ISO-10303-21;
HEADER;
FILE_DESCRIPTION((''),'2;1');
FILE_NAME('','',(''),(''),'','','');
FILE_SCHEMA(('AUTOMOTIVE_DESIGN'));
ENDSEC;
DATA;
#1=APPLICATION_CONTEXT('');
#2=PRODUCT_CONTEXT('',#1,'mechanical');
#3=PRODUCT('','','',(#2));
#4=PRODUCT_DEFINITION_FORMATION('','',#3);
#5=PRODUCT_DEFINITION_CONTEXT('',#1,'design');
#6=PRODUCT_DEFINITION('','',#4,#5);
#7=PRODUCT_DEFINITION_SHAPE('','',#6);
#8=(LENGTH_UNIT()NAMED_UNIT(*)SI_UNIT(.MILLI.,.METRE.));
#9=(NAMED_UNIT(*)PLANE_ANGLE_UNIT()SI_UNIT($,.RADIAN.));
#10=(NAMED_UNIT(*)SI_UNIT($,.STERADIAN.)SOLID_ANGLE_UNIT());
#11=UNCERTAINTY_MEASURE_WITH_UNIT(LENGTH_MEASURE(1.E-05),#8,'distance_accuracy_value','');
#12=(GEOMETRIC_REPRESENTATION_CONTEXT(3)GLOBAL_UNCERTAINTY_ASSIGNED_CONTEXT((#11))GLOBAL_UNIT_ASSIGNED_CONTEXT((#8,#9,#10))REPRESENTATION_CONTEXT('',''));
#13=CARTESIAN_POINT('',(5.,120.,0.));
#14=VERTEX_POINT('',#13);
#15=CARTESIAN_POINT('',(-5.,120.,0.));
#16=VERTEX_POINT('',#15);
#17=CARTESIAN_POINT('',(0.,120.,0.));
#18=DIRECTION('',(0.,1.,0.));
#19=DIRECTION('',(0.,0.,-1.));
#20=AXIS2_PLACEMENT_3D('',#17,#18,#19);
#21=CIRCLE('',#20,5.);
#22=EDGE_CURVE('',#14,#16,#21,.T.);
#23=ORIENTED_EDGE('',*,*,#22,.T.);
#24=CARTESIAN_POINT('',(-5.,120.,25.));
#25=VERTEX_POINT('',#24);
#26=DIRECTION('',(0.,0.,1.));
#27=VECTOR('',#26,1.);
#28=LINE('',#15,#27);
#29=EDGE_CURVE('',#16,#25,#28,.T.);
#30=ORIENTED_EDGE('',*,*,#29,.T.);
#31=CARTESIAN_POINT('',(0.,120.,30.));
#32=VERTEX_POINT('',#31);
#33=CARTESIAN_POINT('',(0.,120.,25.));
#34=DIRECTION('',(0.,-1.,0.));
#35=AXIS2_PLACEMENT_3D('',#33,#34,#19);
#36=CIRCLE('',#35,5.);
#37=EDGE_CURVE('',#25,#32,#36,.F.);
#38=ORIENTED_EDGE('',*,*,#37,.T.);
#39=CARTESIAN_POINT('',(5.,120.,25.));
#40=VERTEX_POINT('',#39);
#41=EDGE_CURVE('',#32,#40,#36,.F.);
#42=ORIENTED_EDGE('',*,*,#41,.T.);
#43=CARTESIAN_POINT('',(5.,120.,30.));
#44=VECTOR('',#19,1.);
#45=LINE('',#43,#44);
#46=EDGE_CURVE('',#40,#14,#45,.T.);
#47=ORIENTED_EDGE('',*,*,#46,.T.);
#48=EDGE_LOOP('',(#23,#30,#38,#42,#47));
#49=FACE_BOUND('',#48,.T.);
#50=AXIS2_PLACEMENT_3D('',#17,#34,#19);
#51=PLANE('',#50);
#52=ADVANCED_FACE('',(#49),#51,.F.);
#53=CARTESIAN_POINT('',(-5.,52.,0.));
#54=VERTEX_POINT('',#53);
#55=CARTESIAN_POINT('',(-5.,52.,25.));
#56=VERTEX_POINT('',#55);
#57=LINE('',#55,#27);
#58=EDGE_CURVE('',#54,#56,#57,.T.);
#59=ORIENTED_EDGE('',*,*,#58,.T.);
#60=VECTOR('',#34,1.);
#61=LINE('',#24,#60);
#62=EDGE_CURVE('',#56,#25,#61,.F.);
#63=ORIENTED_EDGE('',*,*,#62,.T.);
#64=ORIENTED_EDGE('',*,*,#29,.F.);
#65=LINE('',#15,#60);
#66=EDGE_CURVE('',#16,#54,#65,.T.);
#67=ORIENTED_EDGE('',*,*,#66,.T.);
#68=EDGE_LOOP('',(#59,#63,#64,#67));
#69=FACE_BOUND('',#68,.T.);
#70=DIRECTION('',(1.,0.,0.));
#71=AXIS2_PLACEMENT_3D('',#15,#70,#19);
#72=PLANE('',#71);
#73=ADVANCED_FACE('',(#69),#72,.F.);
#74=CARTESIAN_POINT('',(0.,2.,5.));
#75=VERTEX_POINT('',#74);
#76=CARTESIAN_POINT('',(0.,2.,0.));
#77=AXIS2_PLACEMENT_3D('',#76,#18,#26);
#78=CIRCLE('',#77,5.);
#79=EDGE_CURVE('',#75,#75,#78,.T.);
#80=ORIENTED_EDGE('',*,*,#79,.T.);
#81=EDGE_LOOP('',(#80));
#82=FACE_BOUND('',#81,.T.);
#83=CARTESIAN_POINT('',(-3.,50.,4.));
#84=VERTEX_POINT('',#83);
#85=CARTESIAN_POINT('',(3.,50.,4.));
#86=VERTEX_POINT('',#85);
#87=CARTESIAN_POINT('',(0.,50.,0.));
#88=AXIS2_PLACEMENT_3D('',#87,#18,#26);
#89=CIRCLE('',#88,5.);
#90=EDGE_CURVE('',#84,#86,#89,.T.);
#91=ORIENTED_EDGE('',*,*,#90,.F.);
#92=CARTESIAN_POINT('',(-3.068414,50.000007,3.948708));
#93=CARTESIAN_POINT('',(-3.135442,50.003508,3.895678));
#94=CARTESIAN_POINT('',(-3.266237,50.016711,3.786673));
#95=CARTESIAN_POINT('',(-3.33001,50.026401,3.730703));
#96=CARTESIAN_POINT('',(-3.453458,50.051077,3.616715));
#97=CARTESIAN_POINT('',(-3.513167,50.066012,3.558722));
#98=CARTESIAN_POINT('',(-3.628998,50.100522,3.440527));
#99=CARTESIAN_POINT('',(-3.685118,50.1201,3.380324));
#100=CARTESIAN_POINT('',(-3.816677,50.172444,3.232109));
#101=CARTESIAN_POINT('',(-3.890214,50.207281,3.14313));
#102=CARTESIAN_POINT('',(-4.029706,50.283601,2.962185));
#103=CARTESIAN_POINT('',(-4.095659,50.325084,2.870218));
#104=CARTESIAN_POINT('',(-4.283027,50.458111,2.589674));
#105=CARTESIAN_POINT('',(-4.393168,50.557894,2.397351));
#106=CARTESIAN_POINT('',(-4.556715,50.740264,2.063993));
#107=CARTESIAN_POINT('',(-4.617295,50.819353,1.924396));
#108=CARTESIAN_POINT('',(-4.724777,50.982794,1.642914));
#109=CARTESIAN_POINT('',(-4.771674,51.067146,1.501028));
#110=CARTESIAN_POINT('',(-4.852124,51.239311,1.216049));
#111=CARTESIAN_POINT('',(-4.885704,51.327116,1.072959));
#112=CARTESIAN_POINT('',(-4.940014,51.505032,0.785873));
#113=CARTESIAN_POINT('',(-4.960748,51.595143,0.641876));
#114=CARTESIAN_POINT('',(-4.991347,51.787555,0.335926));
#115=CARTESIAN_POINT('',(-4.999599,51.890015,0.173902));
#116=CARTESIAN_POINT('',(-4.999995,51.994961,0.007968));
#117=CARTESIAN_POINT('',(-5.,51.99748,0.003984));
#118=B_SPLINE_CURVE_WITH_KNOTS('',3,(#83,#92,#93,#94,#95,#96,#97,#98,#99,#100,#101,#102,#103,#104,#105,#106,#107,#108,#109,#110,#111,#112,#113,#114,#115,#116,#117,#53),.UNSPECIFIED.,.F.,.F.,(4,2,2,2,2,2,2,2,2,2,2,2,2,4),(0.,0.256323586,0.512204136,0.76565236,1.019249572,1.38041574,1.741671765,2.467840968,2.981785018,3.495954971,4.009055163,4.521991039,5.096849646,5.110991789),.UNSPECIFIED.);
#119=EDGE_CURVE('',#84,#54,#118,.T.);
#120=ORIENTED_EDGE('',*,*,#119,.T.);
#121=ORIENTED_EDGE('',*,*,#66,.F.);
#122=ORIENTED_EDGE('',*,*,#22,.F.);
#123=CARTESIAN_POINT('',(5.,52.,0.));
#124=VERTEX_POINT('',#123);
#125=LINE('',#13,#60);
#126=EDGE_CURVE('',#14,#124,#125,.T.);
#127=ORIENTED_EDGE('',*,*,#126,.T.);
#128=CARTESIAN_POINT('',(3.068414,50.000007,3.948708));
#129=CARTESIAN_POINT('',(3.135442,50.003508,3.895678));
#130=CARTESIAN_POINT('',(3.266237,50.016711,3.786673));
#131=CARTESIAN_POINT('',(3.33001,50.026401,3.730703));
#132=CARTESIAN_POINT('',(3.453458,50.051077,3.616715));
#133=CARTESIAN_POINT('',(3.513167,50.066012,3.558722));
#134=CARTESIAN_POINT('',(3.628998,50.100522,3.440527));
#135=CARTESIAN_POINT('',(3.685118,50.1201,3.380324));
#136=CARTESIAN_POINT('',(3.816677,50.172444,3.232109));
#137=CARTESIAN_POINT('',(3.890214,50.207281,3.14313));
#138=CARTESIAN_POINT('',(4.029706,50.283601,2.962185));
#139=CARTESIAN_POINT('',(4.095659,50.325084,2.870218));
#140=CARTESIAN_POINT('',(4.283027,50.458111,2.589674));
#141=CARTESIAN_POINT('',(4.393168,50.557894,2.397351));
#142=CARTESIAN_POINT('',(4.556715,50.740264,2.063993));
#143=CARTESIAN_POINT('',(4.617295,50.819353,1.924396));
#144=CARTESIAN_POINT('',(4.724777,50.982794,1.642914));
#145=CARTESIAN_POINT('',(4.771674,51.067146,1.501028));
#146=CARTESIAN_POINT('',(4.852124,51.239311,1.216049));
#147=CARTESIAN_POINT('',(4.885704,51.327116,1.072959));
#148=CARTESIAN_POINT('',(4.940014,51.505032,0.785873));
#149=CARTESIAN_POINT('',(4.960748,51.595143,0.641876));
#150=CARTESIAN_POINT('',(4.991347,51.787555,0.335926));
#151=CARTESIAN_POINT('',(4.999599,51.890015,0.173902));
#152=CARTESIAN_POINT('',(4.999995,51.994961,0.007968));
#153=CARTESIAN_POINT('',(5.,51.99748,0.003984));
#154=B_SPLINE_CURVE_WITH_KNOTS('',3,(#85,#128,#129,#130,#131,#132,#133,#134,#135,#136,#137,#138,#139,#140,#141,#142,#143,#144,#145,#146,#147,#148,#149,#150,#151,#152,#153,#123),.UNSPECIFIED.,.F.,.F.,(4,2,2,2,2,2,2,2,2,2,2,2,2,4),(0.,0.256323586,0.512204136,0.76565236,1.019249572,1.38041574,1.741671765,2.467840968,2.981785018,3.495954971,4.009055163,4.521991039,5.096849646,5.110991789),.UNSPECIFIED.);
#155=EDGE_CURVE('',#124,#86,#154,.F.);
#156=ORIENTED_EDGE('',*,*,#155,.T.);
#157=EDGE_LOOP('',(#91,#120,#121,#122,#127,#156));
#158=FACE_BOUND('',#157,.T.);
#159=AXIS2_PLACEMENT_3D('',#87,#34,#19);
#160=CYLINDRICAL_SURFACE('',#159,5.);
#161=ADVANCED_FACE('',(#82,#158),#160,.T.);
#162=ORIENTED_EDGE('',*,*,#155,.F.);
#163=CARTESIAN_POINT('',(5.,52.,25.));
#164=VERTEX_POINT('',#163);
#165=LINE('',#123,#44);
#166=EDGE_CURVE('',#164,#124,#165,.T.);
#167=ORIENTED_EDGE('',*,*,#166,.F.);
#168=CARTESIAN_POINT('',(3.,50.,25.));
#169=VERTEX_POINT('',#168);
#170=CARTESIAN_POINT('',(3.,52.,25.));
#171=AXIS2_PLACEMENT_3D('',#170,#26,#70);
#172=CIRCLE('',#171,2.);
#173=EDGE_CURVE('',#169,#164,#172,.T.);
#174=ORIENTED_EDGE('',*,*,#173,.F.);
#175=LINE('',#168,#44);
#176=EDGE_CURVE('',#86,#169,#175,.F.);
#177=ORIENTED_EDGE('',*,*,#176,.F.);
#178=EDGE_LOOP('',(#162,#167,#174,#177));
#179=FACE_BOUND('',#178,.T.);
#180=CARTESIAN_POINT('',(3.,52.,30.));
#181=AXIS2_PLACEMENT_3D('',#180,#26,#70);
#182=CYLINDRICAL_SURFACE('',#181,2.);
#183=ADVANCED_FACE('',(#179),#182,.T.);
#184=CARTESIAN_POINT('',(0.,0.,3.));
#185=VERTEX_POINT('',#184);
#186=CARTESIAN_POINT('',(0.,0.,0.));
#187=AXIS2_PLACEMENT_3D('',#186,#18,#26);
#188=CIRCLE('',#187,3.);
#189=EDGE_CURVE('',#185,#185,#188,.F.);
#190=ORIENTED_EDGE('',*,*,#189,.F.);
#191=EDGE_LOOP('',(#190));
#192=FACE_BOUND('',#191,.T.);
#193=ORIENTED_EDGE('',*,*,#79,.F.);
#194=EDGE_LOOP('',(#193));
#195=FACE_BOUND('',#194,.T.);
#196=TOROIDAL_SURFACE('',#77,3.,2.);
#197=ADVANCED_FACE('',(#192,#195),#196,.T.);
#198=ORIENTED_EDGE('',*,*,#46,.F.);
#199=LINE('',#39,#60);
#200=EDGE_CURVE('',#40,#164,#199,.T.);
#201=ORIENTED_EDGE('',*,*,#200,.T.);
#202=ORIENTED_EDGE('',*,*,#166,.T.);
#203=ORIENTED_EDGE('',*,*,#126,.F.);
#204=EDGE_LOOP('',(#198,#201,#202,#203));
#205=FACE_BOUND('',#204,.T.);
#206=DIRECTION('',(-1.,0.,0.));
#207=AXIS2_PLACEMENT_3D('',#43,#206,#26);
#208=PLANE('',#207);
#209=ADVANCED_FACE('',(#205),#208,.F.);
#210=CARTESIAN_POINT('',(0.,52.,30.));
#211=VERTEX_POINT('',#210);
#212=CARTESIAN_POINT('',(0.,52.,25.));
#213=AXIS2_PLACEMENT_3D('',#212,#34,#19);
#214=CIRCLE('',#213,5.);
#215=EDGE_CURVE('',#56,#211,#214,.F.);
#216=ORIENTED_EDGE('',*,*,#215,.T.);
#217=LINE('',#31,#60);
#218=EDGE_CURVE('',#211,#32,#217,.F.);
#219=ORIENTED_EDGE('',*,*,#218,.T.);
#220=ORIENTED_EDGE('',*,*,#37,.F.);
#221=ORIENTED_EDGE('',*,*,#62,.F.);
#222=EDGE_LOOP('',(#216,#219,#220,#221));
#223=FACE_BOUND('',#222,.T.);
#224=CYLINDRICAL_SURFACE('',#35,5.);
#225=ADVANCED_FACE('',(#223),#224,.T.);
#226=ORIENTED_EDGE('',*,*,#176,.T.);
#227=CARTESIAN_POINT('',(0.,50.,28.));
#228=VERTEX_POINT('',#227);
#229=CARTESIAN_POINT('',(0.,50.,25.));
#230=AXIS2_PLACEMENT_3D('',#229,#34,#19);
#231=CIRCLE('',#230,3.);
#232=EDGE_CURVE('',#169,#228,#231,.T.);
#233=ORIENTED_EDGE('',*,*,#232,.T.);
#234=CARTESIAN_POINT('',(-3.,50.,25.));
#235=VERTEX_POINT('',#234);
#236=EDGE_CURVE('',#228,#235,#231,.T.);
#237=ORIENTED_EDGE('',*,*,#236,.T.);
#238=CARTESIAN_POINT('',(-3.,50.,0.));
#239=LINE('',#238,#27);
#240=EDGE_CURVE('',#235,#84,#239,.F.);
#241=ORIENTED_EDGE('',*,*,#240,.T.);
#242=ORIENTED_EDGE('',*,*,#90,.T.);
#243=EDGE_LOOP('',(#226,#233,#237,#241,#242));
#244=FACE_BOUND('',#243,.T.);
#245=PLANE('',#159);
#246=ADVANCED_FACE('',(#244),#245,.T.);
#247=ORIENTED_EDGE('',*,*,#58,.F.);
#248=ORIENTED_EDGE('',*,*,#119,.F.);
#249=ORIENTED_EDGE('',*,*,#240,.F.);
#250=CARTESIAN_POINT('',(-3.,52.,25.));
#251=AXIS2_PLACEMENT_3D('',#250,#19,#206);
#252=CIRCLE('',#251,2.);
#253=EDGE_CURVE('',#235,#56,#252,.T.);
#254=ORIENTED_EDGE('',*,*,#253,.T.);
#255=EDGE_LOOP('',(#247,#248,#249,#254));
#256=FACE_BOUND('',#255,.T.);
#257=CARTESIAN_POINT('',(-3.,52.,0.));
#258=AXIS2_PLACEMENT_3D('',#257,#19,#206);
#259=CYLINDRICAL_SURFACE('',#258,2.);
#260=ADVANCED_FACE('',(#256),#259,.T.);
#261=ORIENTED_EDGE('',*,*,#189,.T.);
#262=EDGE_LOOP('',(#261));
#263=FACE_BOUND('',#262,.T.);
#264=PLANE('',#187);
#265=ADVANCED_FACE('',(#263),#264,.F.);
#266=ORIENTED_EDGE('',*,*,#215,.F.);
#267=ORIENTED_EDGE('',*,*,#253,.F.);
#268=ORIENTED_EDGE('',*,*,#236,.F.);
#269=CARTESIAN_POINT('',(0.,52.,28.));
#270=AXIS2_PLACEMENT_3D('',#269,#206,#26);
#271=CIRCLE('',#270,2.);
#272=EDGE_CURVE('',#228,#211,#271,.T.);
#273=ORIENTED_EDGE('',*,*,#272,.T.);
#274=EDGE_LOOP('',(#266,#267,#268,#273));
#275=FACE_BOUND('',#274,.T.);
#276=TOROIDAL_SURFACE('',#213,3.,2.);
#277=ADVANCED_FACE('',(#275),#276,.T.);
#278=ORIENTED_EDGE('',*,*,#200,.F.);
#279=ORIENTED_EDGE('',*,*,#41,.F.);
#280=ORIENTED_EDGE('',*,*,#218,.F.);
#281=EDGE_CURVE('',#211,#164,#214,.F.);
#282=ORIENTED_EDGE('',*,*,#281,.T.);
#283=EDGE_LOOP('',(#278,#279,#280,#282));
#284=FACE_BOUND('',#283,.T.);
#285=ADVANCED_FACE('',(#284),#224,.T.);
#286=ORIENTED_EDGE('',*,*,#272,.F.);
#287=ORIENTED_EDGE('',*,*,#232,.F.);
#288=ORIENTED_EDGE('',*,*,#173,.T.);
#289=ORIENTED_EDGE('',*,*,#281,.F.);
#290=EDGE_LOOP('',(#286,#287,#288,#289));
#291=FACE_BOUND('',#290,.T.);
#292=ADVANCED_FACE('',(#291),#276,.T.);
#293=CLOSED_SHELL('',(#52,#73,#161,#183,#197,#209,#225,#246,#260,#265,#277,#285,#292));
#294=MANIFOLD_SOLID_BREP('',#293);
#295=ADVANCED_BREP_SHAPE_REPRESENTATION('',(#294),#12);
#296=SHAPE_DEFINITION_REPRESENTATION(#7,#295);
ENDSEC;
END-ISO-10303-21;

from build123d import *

# Parameters (mm, degrees)
SKETCH1_R           = 5
BOSS_EXTRUDE1_DEPTH = 50
BOSS_EXTRUDE2_DEPTH = 70
FILLET1_R           = 5
FILLET2_R           = 2
FILLET3_R           = 2


# Some blends are built 0.0001 mm under size
with BuildPart() as part:
    # Sketch1 → Boss-Extrude1 (new body)
    with BuildSketch(Plane(origin=(0, 0, 0), x_dir=(1, 0, 0), z_dir=(0, 1, 0))):
        with Locations(Location((0, 0, 0), (0, 0, 270))):
            Circle(SKETCH1_R)
    extrude(amount=BOSS_EXTRUDE1_DEPTH)

    # Sketch2 → Boss-Extrude2 (add)
    with BuildSketch(Plane(origin=(0, 50, 0), x_dir=(1, 0, 0), z_dir=(0, 1, 0))):
        with BuildLine():
            Line((-5, 0), (-5, -30))
            Line((-5, -30), (5, -30))
            Line((5, -30), (5, 0))
            ThreePointArc((5, 0), (0, 5), (-5, 0))
        make_face()
    extrude(amount=BOSS_EXTRUDE2_DEPTH)

    # Fillet1
    fillet1_edges = [part.edges().sort_by_distance(p)[0] for p in [
        (-5, 85, 30),
        (5, 85, 30),
    ]]
    fillet(fillet1_edges, radius=FILLET1_R - 0.0001)  # a hair under: the kernel refuses the full size

    # Fillet2
    # the kernel refuses this fillet: 2 mm, written as the material it takes off along each edge
    with BuildSketch(Plane(origin=(5, 50, 25.0001), x_dir=(-1, 0, 0), z_dir=(0, 0, -1))) as fillet2_piece_1_section:
        with BuildLine():
            CenterArc((FILLET2_R, FILLET2_R), FILLET2_R, 180, 90)
            Line((0, FILLET2_R), (0, 0))
            Line((0, 0), (FILLET2_R, 0))
        make_face()
    fillet2_piece_1 = extrude(amount=30.0001, mode=Mode.PRIVATE)
    fillet2_piece_1 = fillet2_piece_1 - Plane(origin=(0, 50.338854102, 0), x_dir=(0, 0, 1), z_dir=(0, -1, 0)) * Cylinder(5, 69, mode=Mode.PRIVATE)
    add(fillet2_piece_1, mode=Mode.SUBTRACT)
    with BuildSketch(Plane(origin=(0.0001, 50, 25.0001), x_dir=(1, 0, 0), z_dir=(0, 0, -1))) as fillet2_piece_2:
        with BuildLine():
            CenterArc((4.9999 - FILLET2_R, -FILLET2_R), FILLET2_R, 0, 90)
            Line((4.9999, -FILLET2_R), (4.9999, 0))
            Line((4.9999, 0), (4.9999 - FILLET2_R, 0))
        make_face()
    revolve(axis=Axis((0.0001, 50, 25.0001), (0, -1, 0)), revolution_arc=90, mode=Mode.SUBTRACT)
    with BuildSketch(Plane(origin=(-0.0001, 50, 25.0001), x_dir=(0, 0, 1), z_dir=(1, 0, 0))) as fillet2_piece_3:
        with BuildLine():
            CenterArc((4.9999 - FILLET2_R, -FILLET2_R), FILLET2_R, 0, 90)
            Line((4.9999, -FILLET2_R), (4.9999, 0))
            Line((4.9999, 0), (4.9999 - FILLET2_R, 0))
        make_face()
    revolve(axis=Axis((-0.0001, 50, 25.0001), (0, -1, 0)), revolution_arc=90, mode=Mode.SUBTRACT)
    with BuildSketch(Plane(origin=(-5, 50, -5), x_dir=(1, 0, 0), z_dir=(0, 0, 1))) as fillet2_piece_4_section:
        with BuildLine():
            CenterArc((FILLET2_R, FILLET2_R), FILLET2_R, 180, 90)
            Line((0, FILLET2_R), (0, 0))
            Line((0, 0), (FILLET2_R, 0))
        make_face()
    fillet2_piece_4 = extrude(amount=30.0001, mode=Mode.PRIVATE)
    fillet2_piece_4 = fillet2_piece_4 - Plane(origin=(0, 50.465433579, 0), x_dir=(0, 0, 1), z_dir=(0, -1, 0)) * Cylinder(5, 69, mode=Mode.PRIVATE)
    add(fillet2_piece_4, mode=Mode.SUBTRACT)
    with BuildSketch(Plane(origin=(-0.0001, 50, 30), x_dir=(0, 0, -1), z_dir=(1, 0, 0))) as fillet2_piece_5:
        with BuildLine():
            CenterArc((FILLET2_R, FILLET2_R), FILLET2_R, 180, 90)
            Line((0, FILLET2_R), (0, 0))
            Line((0, 0), (FILLET2_R, 0))
        make_face()
    extrude(amount=0.0002, mode=Mode.SUBTRACT)

    # Fillet3
    fillet3_edges = [part.edges().sort_by_distance(p)[0] for p in [
        (0, 0, -5),
    ]]
    fillet(fillet3_edges, radius=FILLET3_R)


solid = part.part
